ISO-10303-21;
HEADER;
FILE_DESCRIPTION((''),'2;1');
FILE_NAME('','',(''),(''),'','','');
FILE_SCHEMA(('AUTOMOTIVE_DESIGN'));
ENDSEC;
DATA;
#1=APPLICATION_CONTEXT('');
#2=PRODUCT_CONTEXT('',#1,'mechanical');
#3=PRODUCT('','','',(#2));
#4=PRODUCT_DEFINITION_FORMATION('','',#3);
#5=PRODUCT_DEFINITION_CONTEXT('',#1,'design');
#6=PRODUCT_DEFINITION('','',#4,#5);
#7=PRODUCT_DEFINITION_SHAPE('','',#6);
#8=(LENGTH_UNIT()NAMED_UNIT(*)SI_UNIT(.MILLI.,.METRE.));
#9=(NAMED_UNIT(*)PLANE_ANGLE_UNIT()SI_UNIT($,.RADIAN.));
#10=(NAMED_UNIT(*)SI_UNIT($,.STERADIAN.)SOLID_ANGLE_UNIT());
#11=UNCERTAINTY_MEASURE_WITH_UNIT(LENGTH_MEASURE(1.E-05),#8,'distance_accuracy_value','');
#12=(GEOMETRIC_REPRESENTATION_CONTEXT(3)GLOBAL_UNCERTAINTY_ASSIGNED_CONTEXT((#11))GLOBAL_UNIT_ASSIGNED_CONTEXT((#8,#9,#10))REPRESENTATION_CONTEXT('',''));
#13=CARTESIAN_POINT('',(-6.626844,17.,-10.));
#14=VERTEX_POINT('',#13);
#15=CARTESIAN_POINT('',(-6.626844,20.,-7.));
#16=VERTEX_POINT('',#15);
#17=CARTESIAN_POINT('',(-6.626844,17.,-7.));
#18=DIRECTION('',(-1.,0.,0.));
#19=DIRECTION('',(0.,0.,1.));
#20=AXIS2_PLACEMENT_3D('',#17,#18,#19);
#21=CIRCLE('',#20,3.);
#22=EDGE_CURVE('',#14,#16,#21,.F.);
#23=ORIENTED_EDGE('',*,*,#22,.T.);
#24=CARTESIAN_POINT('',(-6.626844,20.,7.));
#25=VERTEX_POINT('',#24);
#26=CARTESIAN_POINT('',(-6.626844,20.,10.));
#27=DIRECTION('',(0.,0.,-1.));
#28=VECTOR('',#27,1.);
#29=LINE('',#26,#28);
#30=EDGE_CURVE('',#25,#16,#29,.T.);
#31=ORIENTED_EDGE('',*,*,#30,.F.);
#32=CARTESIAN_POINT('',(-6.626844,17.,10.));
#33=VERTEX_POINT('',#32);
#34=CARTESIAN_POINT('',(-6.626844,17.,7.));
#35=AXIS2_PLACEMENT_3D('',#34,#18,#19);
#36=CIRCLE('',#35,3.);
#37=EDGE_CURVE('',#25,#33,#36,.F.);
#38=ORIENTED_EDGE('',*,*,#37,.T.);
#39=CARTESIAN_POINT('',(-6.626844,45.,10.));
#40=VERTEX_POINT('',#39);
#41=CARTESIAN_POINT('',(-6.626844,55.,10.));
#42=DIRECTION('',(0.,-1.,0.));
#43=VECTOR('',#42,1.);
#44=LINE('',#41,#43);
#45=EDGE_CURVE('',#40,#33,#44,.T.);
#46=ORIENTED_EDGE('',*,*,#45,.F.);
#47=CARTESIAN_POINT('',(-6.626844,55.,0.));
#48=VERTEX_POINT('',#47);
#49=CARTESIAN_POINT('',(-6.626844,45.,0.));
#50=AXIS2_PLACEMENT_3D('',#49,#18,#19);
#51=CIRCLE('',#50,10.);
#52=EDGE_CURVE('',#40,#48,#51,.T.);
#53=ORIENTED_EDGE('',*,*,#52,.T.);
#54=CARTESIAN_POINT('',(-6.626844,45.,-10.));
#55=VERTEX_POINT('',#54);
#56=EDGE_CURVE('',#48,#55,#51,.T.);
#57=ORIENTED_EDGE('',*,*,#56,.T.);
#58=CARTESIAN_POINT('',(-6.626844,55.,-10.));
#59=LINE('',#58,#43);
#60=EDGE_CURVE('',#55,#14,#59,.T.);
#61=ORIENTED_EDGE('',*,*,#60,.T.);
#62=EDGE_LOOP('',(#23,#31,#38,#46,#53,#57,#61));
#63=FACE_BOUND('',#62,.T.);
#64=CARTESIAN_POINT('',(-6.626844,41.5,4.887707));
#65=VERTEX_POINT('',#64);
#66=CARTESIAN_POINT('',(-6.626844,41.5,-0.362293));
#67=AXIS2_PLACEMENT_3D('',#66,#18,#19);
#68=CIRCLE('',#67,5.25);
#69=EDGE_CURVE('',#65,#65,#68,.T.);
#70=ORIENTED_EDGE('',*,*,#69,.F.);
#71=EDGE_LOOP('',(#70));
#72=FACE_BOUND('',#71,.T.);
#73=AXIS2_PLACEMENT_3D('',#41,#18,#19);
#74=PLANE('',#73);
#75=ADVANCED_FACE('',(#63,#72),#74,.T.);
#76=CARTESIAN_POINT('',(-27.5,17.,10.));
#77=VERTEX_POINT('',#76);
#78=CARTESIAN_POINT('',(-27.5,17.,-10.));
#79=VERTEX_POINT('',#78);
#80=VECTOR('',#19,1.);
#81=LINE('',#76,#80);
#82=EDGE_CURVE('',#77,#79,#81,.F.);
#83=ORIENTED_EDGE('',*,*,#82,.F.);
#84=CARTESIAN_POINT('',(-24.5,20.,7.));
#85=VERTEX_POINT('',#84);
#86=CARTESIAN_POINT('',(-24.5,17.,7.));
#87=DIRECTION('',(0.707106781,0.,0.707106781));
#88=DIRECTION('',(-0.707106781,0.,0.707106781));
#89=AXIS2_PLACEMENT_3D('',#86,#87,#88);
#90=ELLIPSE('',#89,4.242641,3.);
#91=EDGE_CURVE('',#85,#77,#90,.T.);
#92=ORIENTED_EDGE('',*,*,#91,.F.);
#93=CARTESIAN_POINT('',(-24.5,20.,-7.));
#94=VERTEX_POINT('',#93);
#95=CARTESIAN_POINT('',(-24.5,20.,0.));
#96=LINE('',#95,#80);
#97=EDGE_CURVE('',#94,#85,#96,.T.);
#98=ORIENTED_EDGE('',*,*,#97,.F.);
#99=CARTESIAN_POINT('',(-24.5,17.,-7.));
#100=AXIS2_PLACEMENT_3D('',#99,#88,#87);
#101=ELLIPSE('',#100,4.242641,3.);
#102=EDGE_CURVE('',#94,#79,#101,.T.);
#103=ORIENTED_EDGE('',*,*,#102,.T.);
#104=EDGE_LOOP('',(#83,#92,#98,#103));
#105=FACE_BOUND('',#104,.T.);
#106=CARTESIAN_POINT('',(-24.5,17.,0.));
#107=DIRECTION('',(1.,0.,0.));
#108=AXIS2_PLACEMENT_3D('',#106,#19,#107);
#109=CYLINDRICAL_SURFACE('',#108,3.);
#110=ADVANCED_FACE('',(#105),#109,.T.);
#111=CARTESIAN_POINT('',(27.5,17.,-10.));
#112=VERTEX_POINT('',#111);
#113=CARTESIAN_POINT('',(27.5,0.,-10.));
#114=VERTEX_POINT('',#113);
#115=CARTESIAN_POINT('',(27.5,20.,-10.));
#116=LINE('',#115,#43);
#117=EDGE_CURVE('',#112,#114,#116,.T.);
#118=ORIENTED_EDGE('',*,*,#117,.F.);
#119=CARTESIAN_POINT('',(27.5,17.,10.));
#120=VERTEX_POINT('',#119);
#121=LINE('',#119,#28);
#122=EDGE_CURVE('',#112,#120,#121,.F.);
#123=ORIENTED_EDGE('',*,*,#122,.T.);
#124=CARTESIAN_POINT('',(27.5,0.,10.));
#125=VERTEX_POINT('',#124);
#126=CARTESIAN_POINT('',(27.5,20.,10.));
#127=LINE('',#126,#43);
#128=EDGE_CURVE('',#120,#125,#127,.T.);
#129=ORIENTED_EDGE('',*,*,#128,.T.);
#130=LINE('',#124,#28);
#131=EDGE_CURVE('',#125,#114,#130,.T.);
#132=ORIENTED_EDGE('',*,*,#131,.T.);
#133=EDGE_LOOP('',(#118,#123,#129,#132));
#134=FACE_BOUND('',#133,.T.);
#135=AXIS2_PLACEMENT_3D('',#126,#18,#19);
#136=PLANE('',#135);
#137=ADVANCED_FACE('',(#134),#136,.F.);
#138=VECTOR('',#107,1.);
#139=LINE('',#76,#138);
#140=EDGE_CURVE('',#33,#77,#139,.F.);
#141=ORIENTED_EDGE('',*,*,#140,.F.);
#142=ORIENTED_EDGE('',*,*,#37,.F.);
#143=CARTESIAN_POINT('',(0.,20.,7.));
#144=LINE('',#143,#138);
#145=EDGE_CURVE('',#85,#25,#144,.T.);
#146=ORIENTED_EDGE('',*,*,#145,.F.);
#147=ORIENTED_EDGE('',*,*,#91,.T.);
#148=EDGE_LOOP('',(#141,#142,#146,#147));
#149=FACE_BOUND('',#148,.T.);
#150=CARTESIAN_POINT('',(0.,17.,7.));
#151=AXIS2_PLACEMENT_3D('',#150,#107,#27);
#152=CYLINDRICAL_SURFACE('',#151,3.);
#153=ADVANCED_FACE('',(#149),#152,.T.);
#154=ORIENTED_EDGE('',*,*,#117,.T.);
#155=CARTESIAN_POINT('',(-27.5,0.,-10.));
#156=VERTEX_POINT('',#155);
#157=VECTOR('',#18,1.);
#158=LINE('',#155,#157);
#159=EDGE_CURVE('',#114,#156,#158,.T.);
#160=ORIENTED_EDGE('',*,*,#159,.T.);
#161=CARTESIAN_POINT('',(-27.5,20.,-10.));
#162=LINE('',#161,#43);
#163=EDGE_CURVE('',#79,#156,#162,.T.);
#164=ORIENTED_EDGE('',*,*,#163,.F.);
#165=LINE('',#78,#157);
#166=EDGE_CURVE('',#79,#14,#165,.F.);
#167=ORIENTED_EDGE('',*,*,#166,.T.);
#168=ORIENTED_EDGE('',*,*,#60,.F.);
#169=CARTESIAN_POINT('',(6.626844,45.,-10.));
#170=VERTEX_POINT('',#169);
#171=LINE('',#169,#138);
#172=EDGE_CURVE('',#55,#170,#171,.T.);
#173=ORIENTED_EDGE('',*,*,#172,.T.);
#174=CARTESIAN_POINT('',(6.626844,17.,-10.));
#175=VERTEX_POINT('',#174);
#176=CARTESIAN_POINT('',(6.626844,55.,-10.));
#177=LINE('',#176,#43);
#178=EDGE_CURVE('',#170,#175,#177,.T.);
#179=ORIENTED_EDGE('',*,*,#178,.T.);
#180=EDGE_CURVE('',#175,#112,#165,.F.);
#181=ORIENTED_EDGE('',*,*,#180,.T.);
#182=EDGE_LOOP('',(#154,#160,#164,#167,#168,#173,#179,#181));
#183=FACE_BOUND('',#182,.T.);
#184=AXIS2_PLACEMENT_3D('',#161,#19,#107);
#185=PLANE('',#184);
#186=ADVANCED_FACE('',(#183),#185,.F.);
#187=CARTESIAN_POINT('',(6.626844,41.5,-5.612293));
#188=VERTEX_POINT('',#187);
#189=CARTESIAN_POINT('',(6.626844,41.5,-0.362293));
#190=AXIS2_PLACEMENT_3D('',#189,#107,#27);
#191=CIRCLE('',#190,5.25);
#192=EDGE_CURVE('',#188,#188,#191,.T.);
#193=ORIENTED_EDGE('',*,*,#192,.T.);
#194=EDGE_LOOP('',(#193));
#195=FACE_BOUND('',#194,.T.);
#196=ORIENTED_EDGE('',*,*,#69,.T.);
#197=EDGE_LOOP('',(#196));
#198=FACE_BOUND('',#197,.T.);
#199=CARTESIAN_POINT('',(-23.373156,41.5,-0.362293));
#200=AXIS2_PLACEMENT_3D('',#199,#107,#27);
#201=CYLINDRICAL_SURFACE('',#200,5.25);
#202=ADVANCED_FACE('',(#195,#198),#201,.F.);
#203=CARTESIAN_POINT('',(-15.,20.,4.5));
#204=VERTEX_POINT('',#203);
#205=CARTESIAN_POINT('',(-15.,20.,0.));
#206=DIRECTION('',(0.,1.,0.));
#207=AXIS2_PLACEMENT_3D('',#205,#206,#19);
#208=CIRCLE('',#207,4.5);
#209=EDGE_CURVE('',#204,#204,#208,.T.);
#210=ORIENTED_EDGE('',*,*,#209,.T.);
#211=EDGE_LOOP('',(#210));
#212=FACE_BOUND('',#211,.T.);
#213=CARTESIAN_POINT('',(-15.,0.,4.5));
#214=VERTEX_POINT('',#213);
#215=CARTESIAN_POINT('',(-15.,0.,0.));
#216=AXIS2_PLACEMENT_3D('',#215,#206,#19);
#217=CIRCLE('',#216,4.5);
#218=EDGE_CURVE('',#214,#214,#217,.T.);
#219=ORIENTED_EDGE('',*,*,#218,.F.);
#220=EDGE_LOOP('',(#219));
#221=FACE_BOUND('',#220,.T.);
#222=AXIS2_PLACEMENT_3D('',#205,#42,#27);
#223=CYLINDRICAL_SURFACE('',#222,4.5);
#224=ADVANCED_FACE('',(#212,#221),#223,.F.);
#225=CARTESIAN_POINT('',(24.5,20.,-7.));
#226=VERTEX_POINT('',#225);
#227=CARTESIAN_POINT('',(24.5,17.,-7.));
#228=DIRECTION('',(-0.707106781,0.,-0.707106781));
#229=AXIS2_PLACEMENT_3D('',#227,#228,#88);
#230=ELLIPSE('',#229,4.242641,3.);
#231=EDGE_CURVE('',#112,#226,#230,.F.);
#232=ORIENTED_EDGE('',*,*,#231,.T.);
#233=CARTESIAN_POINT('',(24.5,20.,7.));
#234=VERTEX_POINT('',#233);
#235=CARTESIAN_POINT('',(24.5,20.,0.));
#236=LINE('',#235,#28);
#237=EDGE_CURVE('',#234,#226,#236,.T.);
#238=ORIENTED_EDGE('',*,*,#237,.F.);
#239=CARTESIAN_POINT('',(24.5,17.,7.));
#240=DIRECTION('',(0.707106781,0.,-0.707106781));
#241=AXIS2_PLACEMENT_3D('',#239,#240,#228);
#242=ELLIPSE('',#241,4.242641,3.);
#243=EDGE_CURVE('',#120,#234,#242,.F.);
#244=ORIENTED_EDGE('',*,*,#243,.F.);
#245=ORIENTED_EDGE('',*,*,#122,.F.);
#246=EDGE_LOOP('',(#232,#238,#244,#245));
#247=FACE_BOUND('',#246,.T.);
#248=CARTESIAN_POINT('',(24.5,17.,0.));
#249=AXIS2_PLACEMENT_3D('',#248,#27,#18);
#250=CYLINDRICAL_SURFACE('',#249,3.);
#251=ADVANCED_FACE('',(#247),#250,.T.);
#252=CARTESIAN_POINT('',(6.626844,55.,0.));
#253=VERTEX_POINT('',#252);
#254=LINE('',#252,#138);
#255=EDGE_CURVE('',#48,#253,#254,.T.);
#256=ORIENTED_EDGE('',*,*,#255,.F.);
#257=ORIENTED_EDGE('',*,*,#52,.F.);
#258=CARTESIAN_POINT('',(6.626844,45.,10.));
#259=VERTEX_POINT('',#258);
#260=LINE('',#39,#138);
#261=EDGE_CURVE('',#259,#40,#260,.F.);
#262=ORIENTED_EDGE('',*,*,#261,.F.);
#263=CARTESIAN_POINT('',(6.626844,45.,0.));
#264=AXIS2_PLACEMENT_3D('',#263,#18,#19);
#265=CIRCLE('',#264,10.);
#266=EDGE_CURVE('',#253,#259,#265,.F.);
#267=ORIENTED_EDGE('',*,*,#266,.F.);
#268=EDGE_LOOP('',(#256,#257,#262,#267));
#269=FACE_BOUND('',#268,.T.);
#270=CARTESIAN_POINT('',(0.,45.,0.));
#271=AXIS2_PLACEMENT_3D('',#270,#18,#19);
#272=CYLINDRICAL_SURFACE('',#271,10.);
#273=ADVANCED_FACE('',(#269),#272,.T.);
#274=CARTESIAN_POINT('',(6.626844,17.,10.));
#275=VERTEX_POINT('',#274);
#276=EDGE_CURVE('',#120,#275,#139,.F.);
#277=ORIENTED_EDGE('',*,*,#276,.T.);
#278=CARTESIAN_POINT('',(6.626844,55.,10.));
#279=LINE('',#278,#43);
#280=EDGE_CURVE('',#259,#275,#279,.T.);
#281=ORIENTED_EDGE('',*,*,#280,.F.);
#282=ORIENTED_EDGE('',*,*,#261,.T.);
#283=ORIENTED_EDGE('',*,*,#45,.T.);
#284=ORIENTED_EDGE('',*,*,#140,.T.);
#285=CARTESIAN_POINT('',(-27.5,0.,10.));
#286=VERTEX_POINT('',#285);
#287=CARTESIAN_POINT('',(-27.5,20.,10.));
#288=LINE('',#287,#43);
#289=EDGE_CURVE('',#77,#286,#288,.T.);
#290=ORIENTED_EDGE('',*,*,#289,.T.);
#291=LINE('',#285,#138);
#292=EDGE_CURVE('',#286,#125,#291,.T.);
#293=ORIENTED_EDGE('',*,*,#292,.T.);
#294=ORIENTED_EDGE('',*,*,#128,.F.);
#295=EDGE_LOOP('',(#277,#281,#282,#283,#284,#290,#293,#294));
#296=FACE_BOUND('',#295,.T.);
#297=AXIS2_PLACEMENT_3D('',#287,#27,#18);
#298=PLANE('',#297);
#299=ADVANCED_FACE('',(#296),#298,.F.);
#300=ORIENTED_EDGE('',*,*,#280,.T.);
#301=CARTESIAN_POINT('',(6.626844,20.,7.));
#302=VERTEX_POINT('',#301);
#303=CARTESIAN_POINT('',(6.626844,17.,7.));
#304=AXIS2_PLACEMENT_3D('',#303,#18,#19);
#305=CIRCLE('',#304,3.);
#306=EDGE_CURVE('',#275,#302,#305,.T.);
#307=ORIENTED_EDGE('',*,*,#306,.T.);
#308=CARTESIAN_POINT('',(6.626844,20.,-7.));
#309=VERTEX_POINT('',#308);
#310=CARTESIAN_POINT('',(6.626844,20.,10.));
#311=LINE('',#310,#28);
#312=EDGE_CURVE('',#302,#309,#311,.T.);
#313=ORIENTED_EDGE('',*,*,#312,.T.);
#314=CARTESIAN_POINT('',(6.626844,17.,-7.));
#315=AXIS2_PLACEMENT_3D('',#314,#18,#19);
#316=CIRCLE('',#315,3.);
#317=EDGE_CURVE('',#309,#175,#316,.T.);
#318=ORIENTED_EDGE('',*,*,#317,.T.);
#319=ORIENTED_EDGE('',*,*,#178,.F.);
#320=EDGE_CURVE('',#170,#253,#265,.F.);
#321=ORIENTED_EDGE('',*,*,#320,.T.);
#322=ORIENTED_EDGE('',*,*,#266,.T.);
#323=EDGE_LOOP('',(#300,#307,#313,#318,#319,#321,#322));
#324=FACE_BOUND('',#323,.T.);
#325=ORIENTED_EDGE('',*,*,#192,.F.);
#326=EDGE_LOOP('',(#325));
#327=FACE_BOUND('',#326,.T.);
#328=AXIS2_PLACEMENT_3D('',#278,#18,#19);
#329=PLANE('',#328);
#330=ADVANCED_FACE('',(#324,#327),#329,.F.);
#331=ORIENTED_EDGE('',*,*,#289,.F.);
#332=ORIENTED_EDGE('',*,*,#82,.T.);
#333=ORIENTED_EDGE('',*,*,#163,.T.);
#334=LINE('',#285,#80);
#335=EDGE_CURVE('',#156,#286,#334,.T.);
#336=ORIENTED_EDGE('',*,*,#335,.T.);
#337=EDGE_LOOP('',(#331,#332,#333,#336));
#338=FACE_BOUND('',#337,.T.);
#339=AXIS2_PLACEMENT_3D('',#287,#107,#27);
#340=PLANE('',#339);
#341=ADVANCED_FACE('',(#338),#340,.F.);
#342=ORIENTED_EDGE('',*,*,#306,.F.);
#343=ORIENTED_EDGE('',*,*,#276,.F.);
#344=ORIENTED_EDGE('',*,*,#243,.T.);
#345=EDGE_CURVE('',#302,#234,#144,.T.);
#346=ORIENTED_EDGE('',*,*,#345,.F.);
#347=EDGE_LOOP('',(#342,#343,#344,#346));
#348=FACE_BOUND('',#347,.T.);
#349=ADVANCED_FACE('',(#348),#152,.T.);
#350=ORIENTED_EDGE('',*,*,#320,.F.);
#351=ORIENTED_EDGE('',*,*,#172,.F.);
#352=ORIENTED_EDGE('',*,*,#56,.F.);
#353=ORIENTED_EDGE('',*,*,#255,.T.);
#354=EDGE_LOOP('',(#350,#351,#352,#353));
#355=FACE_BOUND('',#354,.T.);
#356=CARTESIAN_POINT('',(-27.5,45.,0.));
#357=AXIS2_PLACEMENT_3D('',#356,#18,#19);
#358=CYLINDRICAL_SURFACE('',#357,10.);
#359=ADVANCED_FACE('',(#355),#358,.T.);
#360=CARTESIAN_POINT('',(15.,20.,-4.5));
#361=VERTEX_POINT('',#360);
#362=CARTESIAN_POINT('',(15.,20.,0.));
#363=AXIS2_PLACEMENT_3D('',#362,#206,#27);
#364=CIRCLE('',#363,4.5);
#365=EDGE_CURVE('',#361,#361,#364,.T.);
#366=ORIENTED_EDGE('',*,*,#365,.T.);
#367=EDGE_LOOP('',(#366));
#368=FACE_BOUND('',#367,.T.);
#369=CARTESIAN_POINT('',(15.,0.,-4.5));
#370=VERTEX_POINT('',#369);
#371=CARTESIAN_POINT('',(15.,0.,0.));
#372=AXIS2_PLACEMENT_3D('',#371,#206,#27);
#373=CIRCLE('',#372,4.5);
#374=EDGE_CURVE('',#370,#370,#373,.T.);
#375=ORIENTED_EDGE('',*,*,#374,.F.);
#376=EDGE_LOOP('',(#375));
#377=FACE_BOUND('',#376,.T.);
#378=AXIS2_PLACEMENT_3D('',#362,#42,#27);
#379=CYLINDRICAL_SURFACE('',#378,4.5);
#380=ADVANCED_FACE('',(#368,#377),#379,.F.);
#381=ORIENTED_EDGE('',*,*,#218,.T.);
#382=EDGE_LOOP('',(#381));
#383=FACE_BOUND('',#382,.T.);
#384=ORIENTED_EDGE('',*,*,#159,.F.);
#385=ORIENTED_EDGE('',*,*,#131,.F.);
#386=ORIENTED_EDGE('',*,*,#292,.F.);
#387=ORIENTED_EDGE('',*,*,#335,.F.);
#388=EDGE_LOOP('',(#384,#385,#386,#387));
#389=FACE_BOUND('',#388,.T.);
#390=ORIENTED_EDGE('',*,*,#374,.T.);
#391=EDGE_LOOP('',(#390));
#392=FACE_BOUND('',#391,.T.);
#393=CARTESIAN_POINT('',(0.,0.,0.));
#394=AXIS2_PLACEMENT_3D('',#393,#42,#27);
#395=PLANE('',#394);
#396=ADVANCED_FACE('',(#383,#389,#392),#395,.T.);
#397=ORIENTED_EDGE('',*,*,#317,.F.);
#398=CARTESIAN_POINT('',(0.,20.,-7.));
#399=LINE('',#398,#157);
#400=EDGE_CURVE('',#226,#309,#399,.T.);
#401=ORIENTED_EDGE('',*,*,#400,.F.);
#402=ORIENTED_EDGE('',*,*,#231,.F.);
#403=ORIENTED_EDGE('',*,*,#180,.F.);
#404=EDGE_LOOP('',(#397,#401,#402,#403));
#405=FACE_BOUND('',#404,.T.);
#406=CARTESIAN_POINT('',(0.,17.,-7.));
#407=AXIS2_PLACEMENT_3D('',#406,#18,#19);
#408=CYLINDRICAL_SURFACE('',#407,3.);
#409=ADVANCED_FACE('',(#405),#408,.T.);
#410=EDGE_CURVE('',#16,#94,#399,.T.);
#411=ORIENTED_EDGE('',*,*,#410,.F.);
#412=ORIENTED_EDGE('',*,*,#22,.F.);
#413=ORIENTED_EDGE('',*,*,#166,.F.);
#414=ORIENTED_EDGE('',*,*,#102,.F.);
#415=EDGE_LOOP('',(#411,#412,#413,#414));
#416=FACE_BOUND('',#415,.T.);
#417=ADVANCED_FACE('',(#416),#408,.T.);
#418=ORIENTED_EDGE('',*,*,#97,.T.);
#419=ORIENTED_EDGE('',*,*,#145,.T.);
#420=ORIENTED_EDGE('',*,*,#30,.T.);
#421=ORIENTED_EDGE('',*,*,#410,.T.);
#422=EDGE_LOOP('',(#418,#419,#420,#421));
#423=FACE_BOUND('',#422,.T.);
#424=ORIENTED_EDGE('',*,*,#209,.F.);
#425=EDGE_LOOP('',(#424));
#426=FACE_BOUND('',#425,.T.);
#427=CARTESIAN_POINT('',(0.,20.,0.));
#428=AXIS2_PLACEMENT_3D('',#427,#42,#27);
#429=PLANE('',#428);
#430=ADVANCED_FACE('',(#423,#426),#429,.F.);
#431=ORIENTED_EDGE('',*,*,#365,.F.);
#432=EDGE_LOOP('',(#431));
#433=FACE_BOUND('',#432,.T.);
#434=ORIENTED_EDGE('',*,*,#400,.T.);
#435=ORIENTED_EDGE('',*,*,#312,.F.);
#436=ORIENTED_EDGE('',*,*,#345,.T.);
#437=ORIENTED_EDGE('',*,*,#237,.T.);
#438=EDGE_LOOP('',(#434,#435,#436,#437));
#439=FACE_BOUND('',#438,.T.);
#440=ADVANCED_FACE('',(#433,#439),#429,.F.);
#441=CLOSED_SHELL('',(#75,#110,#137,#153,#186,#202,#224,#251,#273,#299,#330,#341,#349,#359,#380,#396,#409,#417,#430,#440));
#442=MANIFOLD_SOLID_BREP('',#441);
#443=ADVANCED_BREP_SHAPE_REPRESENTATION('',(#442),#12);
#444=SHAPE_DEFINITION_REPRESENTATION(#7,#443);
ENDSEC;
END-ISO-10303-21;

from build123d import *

# Parameters (mm, degrees)
SKETCH_1_W          = 55
SKETCH_1_H          = 20
SKETCH_1_R          = 4.5
EXTRUDE_1_DEPTH     = 20
EXTRUDE_START       = -10
EXTRUDE_2_OUTLINE_W = 13.25368731
EXTRUDE_2_OUTLINE_H = 35
EXTRUDE_2_DEPTH     = 20
SKETCH_3_R          = 5.25
CUT_EXTRUDE_1_DEPTH = 30
FILLET1_R           = 10
FILLET2_R           = 3
FILLET3_R           = 3


# Read off the part's stored shape, not the designer's step: 填料-伸長2
with BuildPart() as part:
    # 草圖1 → 填料-伸長1 (new body)
    with BuildSketch(Plane(origin=(0, 0, 0), x_dir=(1, 0, 0), z_dir=(0, 1, 0))):
        Rectangle(SKETCH_1_W, SKETCH_1_H)
        with Locations(Location((-15, 0, 0), (0, 0, 270))):
            Circle(SKETCH_1_R, mode=Mode.SUBTRACT)
        with Locations(Location((15, 0, 0), (0, 0, 90))):
            Circle(SKETCH_1_R, mode=Mode.SUBTRACT)
    extrude(amount=EXTRUDE_1_DEPTH)

    # 填料-伸長2 outline → 填料-伸長2 (add)
    with BuildSketch(Plane.XY.offset(EXTRUDE_START)):
        with Locations((0, 37.5)):
            Rectangle(EXTRUDE_2_OUTLINE_W, EXTRUDE_2_OUTLINE_H)
    extrude(amount=EXTRUDE_2_DEPTH)

    # 草圖3 → 除料-伸長1 (cut)
    with BuildSketch(Plane(origin=(6.626843655, 0, 0), x_dir=(0, 0, -1), z_dir=(1, 0, 0))):
        with Locations((0.362292653, 41.5)):
            Circle(SKETCH_3_R)
    extrude(amount=-CUT_EXTRUDE_1_DEPTH, mode=Mode.SUBTRACT)

    # Fillet1
    fillet1_edges = [part.edges().sort_by_distance(p)[0] for p in [
        (0, 55, -10),
        (0, 55, 10),
    ]]
    fillet(fillet1_edges, radius=FILLET1_R - 0.0001)  # a hair under: the kernel refuses the full size

    # Fillet2
    fillet2_edges = [part.edges().sort_by_distance(p)[0] for p in [
        (-27.5, 20, 0),
        (-17.063421827, 20, 10),
        (-17.063421827, 20, -10),
    ]]
    fillet(fillet2_edges, radius=FILLET2_R)

    # Fillet3
    fillet3_edges = [part.edges().sort_by_distance(p)[0] for p in [
        (17.063421827, 20, 10),
        (27.5, 20, 0),
        (17.063421828, 20, -10),
    ]]
    fillet(fillet3_edges, radius=FILLET3_R)


solid = part.part
